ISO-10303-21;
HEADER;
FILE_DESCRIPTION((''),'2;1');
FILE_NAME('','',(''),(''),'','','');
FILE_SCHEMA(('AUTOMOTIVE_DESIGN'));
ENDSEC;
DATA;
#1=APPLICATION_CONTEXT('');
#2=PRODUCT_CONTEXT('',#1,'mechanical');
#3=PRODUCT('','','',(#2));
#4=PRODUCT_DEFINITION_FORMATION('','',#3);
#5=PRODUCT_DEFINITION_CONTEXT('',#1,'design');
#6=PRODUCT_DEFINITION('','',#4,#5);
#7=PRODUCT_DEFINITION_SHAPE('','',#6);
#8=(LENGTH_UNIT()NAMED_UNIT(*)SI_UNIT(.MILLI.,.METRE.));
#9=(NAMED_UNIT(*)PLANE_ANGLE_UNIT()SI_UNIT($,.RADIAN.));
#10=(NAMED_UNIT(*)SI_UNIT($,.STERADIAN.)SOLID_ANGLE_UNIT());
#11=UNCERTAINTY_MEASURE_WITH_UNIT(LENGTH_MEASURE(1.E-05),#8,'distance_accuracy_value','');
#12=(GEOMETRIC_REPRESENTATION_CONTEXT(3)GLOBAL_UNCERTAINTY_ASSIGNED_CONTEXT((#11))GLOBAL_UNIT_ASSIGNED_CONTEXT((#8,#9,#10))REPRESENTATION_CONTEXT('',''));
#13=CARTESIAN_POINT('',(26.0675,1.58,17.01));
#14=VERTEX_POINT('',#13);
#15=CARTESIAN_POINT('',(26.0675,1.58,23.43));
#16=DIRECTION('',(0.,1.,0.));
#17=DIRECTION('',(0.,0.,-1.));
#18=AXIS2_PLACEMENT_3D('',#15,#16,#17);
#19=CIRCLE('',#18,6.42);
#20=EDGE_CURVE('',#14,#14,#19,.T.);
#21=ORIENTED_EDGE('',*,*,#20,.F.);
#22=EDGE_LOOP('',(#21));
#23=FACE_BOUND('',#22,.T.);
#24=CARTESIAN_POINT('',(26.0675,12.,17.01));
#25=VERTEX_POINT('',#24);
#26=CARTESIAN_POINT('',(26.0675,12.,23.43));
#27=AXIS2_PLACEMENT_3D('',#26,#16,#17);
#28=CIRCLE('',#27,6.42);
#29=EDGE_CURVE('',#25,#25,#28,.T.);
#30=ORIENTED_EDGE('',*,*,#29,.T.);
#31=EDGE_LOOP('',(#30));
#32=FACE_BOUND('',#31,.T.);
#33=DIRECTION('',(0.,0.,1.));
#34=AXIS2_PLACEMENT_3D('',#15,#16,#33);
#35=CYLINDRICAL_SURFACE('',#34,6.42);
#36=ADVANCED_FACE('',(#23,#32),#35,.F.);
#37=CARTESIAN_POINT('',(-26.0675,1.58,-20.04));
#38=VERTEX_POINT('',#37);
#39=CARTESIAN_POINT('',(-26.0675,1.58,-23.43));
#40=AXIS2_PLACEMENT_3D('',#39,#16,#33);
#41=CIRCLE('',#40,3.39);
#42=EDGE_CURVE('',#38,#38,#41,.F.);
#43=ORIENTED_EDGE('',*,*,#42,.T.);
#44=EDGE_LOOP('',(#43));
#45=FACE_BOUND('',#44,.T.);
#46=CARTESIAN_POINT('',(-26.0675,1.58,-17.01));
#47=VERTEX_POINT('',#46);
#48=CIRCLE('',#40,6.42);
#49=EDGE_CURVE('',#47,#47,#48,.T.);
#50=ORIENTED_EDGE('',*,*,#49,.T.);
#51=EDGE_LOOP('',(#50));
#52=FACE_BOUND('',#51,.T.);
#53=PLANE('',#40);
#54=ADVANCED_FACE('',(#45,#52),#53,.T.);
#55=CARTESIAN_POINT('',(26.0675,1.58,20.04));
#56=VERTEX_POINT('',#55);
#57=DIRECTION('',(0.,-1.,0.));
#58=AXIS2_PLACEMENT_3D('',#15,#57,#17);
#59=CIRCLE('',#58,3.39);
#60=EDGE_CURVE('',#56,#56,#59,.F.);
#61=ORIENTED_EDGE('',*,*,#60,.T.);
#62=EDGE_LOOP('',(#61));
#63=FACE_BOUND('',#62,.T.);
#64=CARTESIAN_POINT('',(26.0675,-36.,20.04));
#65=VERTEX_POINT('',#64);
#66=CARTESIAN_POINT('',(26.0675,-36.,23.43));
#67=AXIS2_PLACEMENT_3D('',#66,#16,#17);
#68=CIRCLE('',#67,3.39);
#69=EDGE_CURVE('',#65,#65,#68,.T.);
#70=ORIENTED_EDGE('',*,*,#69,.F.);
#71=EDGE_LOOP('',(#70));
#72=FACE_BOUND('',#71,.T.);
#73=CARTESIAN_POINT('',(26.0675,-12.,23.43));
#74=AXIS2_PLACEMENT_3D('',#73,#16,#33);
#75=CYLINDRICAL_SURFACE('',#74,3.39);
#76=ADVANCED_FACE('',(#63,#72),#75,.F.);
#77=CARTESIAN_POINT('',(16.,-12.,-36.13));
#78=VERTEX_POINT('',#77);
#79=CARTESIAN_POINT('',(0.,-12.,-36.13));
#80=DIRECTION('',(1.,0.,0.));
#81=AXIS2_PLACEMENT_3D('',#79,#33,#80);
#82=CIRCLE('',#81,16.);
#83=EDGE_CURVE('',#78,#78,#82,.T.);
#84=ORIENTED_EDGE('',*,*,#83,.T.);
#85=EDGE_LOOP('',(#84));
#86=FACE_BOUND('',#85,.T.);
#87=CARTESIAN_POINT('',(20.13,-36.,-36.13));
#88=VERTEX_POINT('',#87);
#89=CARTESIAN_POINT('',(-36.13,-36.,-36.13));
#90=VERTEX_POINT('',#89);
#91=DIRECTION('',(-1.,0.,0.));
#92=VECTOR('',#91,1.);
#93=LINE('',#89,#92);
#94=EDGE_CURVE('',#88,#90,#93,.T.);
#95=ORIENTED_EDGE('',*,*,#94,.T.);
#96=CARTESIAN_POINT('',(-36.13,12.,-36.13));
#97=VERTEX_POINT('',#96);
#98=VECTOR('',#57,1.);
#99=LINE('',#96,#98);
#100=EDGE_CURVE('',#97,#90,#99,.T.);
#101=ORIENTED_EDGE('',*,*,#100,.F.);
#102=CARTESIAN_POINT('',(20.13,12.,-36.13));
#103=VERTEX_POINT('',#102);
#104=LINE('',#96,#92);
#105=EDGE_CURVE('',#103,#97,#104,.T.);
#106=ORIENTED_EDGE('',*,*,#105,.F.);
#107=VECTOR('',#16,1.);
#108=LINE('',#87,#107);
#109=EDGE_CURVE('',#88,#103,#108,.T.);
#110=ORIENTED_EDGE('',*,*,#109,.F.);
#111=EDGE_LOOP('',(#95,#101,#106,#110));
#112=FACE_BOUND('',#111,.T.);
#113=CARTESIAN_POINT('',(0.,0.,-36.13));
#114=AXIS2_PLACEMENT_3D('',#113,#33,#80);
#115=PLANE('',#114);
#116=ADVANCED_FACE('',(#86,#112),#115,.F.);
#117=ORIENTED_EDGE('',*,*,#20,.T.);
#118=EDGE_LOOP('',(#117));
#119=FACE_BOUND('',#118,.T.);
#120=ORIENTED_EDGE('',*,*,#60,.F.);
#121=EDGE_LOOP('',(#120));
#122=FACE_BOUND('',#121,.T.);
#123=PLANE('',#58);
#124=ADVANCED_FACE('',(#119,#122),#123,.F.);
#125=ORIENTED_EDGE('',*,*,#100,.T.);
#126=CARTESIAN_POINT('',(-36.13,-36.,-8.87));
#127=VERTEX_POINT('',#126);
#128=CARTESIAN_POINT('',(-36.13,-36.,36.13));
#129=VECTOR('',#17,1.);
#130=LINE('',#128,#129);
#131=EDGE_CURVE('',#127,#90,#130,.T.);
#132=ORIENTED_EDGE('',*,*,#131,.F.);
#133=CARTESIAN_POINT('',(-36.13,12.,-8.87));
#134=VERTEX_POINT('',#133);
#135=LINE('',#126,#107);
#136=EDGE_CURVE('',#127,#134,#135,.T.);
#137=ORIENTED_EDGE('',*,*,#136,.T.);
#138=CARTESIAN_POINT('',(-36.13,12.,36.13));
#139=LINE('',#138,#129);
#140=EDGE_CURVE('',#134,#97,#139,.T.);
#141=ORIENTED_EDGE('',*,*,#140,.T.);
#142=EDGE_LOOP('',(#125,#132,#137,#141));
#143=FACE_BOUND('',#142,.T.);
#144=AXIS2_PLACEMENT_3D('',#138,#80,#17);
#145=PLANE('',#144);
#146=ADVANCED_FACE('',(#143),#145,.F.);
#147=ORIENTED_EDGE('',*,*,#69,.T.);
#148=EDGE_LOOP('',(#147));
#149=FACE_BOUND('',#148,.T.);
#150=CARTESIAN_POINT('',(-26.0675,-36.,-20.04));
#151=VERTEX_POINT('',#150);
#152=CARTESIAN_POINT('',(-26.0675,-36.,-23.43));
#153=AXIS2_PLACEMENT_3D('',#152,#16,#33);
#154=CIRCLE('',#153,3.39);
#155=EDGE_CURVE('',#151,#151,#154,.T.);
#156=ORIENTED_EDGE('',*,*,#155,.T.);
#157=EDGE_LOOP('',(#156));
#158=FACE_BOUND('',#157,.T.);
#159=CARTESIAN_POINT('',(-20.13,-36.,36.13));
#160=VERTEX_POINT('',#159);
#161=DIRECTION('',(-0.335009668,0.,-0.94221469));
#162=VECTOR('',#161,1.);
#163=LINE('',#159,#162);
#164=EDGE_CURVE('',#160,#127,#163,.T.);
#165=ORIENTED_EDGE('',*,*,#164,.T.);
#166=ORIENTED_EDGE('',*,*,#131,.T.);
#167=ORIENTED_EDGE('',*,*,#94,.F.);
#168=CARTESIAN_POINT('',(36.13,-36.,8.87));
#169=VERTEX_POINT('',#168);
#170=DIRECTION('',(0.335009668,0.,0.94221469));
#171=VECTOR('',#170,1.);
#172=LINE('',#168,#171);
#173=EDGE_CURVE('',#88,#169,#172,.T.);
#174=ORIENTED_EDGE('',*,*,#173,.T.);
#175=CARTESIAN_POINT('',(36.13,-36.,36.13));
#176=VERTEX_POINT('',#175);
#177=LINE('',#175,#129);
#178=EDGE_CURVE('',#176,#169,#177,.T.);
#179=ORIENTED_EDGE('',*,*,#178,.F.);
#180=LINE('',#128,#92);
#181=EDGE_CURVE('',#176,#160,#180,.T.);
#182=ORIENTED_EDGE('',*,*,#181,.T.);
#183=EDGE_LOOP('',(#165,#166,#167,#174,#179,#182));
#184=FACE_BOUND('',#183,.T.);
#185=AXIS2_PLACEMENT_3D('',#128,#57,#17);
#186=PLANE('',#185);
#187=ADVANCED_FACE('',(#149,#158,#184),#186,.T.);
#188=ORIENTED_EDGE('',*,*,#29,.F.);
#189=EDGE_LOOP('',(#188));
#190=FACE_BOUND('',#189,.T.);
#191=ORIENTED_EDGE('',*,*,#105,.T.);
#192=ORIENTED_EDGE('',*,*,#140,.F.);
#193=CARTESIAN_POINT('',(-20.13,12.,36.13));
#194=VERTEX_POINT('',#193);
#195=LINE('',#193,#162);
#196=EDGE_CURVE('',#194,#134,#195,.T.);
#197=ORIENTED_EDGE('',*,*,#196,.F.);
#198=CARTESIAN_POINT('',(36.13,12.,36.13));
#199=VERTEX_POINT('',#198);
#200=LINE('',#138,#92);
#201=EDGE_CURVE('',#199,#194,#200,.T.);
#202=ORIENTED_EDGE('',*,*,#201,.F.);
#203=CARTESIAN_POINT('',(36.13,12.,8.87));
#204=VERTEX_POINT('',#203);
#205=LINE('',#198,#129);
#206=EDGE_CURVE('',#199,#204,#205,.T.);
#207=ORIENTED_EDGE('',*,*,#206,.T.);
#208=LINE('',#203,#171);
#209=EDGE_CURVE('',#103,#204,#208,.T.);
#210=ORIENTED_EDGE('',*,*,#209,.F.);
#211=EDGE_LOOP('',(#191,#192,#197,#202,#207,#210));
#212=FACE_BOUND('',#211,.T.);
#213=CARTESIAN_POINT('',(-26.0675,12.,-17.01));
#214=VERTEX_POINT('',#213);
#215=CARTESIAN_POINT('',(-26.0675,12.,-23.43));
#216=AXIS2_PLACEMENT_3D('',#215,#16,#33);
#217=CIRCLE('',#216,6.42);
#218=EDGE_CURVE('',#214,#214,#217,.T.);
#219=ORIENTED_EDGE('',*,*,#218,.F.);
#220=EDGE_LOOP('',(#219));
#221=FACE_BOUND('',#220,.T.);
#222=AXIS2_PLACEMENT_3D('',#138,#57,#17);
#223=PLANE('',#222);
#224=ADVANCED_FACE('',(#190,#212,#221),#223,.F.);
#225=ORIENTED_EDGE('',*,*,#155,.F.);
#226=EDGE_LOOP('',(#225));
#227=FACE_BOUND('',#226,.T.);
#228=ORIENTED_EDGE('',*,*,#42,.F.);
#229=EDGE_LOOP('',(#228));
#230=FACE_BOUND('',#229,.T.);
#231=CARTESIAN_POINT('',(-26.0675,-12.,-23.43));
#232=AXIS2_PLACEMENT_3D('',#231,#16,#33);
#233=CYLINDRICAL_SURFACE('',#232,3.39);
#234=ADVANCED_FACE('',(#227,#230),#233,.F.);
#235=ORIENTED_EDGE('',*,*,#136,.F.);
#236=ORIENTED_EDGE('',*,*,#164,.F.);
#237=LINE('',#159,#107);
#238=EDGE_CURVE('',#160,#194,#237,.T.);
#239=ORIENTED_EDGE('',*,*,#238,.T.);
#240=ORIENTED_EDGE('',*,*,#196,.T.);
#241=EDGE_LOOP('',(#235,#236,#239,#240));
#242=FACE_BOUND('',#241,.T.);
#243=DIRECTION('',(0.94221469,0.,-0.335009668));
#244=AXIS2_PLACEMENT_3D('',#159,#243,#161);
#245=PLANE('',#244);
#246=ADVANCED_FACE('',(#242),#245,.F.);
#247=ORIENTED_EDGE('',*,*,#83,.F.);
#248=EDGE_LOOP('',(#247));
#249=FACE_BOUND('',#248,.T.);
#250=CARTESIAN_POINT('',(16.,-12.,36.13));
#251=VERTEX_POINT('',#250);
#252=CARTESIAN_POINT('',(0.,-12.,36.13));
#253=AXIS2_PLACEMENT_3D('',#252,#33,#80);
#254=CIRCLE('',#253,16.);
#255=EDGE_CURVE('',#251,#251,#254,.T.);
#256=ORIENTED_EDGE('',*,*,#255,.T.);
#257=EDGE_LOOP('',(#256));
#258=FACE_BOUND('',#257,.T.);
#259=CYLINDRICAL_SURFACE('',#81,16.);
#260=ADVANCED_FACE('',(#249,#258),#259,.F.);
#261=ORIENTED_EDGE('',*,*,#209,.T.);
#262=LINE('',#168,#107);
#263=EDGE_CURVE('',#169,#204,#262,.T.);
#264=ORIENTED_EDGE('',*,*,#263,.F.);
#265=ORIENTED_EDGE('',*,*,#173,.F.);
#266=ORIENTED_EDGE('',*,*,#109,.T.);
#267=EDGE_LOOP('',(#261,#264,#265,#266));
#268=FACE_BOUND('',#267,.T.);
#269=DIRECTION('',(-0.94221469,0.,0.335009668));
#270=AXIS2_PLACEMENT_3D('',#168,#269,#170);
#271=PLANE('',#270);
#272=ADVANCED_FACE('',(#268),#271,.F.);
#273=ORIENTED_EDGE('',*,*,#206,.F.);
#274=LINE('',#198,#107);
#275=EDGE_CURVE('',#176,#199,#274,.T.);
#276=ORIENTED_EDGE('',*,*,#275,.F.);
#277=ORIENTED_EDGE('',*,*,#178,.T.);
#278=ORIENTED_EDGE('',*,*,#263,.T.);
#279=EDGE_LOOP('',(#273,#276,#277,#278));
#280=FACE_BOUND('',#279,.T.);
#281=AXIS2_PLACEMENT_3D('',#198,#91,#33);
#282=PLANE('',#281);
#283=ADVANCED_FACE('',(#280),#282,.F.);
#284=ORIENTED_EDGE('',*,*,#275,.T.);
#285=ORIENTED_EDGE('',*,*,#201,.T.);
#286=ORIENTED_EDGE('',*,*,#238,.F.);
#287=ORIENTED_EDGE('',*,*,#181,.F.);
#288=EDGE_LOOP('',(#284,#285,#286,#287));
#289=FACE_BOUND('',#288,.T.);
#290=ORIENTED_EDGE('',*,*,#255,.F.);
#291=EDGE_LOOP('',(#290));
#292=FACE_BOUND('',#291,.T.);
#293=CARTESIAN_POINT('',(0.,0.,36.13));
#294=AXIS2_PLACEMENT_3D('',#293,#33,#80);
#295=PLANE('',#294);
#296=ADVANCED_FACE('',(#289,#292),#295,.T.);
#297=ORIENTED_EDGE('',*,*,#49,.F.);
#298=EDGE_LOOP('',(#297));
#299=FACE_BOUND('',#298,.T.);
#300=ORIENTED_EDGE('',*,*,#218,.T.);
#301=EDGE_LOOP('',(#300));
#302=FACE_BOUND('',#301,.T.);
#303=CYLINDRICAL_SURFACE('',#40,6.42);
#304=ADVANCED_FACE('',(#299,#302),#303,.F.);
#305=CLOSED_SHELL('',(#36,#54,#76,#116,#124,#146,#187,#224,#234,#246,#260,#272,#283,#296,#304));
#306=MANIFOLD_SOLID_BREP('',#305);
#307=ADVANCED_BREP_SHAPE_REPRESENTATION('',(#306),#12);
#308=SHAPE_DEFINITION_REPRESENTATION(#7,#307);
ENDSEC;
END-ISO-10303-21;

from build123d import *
from build123d.topology import SkipClean

# Parameters (mm, degrees)
SKETCH1_W           = 72.26
SKETCH1_H           = 24
BOSS_EXTRUDE1_DEPTH = 36.13
CUT_EXTRUDE1_DEPTH  = 82.675482857
SKETCH3_R           = 3.39
CUT_EXTRUDE2_DEPTH  = 57.451340108
SKETCH4_R           = 6.42
CUT_EXTRUDE3_DEPTH  = 10.42
CUT_EXTRUDE4_DEPTH  = 71.105305077


with BuildPart() as part:
    # Sketch1 → Boss-Extrude1 (new, symmetric)
    with BuildSketch(Plane.XY):
        Rectangle(SKETCH1_W, SKETCH1_H)
    boss_extrude1 = extrude(amount=BOSS_EXTRUDE1_DEPTH, both=True)

    # Sketch2 → Cut-Extrude1 (cut, through all)
    with BuildSketch(Plane.XY.offset(36.13)):
        with BuildLine():
            Line((-16, -12), (16, -12))
            ThreePointArc((16, -12), (0, 4), (-16, -12))
        make_face()
    cut_extrude1 = extrude(amount=-CUT_EXTRUDE1_DEPTH, mode=Mode.SUBTRACT)

    # Sketch3 → Cut-Extrude2 (cut, through all)
    with BuildSketch(Plane(origin=(0, 12, 0), x_dir=(1, 0, 0), z_dir=(0, 1, 0))):
        with Locations((-26.0675, 23.43)):
            Circle(SKETCH3_R)
        with Locations((26.0675, -23.43)):
            Circle(SKETCH3_R)
    cut_extrude2 = extrude(amount=-CUT_EXTRUDE2_DEPTH, mode=Mode.SUBTRACT)

    # Mirror2: Boss-Extrude1, Cut-Extrude1, Cut-Extrude2 across plane
    with SkipClean():  # the faces are left unmerged after this step: merging them gives an invalid solid
        add(boss_extrude1.mirror(Plane(origin=(-36.13, -12, 36.13), x_dir=(0, 0, 1), z_dir=(0, 1, 0))))
        add(cut_extrude1.mirror(Plane(origin=(-36.13, -12, 36.13), x_dir=(0, 0, 1), z_dir=(0, 1, 0))), mode=Mode.SUBTRACT)
        add(cut_extrude2.mirror(Plane(origin=(-36.13, -12, 36.13), x_dir=(0, 0, 1), z_dir=(0, 1, 0))), mode=Mode.SUBTRACT)
    add(part.part.scale(1), mode=Mode.REPLACE)  # the faces are merged on a copy

    # Sketch4 → Cut-Extrude3 (cut)
    with BuildSketch(Plane(origin=(0, 12, 0), x_dir=(1, 0, 0), z_dir=(0, 1, 0))):
        with Locations((-26.0675, 23.43)):
            Circle(SKETCH4_R)
        with Locations((26.0675, -23.43)):
            Circle(SKETCH4_R)
    extrude(amount=-CUT_EXTRUDE3_DEPTH, mode=Mode.SUBTRACT)

    # Sketch5 → Cut-Extrude4 (cut, through all)
    with BuildSketch(Plane(origin=(0, 12, 0), x_dir=(1, 0, 0), z_dir=(0, 1, 0))):
        Polygon((-20.13, -36.13), (-36.13, 8.87), (-36.13, -36.13), align=None)
        Polygon((36.13, 36.13), (36.13, -8.87), (20.13, 36.13), align=None)
    extrude(amount=-CUT_EXTRUDE4_DEPTH, mode=Mode.SUBTRACT)


solid = part.part
